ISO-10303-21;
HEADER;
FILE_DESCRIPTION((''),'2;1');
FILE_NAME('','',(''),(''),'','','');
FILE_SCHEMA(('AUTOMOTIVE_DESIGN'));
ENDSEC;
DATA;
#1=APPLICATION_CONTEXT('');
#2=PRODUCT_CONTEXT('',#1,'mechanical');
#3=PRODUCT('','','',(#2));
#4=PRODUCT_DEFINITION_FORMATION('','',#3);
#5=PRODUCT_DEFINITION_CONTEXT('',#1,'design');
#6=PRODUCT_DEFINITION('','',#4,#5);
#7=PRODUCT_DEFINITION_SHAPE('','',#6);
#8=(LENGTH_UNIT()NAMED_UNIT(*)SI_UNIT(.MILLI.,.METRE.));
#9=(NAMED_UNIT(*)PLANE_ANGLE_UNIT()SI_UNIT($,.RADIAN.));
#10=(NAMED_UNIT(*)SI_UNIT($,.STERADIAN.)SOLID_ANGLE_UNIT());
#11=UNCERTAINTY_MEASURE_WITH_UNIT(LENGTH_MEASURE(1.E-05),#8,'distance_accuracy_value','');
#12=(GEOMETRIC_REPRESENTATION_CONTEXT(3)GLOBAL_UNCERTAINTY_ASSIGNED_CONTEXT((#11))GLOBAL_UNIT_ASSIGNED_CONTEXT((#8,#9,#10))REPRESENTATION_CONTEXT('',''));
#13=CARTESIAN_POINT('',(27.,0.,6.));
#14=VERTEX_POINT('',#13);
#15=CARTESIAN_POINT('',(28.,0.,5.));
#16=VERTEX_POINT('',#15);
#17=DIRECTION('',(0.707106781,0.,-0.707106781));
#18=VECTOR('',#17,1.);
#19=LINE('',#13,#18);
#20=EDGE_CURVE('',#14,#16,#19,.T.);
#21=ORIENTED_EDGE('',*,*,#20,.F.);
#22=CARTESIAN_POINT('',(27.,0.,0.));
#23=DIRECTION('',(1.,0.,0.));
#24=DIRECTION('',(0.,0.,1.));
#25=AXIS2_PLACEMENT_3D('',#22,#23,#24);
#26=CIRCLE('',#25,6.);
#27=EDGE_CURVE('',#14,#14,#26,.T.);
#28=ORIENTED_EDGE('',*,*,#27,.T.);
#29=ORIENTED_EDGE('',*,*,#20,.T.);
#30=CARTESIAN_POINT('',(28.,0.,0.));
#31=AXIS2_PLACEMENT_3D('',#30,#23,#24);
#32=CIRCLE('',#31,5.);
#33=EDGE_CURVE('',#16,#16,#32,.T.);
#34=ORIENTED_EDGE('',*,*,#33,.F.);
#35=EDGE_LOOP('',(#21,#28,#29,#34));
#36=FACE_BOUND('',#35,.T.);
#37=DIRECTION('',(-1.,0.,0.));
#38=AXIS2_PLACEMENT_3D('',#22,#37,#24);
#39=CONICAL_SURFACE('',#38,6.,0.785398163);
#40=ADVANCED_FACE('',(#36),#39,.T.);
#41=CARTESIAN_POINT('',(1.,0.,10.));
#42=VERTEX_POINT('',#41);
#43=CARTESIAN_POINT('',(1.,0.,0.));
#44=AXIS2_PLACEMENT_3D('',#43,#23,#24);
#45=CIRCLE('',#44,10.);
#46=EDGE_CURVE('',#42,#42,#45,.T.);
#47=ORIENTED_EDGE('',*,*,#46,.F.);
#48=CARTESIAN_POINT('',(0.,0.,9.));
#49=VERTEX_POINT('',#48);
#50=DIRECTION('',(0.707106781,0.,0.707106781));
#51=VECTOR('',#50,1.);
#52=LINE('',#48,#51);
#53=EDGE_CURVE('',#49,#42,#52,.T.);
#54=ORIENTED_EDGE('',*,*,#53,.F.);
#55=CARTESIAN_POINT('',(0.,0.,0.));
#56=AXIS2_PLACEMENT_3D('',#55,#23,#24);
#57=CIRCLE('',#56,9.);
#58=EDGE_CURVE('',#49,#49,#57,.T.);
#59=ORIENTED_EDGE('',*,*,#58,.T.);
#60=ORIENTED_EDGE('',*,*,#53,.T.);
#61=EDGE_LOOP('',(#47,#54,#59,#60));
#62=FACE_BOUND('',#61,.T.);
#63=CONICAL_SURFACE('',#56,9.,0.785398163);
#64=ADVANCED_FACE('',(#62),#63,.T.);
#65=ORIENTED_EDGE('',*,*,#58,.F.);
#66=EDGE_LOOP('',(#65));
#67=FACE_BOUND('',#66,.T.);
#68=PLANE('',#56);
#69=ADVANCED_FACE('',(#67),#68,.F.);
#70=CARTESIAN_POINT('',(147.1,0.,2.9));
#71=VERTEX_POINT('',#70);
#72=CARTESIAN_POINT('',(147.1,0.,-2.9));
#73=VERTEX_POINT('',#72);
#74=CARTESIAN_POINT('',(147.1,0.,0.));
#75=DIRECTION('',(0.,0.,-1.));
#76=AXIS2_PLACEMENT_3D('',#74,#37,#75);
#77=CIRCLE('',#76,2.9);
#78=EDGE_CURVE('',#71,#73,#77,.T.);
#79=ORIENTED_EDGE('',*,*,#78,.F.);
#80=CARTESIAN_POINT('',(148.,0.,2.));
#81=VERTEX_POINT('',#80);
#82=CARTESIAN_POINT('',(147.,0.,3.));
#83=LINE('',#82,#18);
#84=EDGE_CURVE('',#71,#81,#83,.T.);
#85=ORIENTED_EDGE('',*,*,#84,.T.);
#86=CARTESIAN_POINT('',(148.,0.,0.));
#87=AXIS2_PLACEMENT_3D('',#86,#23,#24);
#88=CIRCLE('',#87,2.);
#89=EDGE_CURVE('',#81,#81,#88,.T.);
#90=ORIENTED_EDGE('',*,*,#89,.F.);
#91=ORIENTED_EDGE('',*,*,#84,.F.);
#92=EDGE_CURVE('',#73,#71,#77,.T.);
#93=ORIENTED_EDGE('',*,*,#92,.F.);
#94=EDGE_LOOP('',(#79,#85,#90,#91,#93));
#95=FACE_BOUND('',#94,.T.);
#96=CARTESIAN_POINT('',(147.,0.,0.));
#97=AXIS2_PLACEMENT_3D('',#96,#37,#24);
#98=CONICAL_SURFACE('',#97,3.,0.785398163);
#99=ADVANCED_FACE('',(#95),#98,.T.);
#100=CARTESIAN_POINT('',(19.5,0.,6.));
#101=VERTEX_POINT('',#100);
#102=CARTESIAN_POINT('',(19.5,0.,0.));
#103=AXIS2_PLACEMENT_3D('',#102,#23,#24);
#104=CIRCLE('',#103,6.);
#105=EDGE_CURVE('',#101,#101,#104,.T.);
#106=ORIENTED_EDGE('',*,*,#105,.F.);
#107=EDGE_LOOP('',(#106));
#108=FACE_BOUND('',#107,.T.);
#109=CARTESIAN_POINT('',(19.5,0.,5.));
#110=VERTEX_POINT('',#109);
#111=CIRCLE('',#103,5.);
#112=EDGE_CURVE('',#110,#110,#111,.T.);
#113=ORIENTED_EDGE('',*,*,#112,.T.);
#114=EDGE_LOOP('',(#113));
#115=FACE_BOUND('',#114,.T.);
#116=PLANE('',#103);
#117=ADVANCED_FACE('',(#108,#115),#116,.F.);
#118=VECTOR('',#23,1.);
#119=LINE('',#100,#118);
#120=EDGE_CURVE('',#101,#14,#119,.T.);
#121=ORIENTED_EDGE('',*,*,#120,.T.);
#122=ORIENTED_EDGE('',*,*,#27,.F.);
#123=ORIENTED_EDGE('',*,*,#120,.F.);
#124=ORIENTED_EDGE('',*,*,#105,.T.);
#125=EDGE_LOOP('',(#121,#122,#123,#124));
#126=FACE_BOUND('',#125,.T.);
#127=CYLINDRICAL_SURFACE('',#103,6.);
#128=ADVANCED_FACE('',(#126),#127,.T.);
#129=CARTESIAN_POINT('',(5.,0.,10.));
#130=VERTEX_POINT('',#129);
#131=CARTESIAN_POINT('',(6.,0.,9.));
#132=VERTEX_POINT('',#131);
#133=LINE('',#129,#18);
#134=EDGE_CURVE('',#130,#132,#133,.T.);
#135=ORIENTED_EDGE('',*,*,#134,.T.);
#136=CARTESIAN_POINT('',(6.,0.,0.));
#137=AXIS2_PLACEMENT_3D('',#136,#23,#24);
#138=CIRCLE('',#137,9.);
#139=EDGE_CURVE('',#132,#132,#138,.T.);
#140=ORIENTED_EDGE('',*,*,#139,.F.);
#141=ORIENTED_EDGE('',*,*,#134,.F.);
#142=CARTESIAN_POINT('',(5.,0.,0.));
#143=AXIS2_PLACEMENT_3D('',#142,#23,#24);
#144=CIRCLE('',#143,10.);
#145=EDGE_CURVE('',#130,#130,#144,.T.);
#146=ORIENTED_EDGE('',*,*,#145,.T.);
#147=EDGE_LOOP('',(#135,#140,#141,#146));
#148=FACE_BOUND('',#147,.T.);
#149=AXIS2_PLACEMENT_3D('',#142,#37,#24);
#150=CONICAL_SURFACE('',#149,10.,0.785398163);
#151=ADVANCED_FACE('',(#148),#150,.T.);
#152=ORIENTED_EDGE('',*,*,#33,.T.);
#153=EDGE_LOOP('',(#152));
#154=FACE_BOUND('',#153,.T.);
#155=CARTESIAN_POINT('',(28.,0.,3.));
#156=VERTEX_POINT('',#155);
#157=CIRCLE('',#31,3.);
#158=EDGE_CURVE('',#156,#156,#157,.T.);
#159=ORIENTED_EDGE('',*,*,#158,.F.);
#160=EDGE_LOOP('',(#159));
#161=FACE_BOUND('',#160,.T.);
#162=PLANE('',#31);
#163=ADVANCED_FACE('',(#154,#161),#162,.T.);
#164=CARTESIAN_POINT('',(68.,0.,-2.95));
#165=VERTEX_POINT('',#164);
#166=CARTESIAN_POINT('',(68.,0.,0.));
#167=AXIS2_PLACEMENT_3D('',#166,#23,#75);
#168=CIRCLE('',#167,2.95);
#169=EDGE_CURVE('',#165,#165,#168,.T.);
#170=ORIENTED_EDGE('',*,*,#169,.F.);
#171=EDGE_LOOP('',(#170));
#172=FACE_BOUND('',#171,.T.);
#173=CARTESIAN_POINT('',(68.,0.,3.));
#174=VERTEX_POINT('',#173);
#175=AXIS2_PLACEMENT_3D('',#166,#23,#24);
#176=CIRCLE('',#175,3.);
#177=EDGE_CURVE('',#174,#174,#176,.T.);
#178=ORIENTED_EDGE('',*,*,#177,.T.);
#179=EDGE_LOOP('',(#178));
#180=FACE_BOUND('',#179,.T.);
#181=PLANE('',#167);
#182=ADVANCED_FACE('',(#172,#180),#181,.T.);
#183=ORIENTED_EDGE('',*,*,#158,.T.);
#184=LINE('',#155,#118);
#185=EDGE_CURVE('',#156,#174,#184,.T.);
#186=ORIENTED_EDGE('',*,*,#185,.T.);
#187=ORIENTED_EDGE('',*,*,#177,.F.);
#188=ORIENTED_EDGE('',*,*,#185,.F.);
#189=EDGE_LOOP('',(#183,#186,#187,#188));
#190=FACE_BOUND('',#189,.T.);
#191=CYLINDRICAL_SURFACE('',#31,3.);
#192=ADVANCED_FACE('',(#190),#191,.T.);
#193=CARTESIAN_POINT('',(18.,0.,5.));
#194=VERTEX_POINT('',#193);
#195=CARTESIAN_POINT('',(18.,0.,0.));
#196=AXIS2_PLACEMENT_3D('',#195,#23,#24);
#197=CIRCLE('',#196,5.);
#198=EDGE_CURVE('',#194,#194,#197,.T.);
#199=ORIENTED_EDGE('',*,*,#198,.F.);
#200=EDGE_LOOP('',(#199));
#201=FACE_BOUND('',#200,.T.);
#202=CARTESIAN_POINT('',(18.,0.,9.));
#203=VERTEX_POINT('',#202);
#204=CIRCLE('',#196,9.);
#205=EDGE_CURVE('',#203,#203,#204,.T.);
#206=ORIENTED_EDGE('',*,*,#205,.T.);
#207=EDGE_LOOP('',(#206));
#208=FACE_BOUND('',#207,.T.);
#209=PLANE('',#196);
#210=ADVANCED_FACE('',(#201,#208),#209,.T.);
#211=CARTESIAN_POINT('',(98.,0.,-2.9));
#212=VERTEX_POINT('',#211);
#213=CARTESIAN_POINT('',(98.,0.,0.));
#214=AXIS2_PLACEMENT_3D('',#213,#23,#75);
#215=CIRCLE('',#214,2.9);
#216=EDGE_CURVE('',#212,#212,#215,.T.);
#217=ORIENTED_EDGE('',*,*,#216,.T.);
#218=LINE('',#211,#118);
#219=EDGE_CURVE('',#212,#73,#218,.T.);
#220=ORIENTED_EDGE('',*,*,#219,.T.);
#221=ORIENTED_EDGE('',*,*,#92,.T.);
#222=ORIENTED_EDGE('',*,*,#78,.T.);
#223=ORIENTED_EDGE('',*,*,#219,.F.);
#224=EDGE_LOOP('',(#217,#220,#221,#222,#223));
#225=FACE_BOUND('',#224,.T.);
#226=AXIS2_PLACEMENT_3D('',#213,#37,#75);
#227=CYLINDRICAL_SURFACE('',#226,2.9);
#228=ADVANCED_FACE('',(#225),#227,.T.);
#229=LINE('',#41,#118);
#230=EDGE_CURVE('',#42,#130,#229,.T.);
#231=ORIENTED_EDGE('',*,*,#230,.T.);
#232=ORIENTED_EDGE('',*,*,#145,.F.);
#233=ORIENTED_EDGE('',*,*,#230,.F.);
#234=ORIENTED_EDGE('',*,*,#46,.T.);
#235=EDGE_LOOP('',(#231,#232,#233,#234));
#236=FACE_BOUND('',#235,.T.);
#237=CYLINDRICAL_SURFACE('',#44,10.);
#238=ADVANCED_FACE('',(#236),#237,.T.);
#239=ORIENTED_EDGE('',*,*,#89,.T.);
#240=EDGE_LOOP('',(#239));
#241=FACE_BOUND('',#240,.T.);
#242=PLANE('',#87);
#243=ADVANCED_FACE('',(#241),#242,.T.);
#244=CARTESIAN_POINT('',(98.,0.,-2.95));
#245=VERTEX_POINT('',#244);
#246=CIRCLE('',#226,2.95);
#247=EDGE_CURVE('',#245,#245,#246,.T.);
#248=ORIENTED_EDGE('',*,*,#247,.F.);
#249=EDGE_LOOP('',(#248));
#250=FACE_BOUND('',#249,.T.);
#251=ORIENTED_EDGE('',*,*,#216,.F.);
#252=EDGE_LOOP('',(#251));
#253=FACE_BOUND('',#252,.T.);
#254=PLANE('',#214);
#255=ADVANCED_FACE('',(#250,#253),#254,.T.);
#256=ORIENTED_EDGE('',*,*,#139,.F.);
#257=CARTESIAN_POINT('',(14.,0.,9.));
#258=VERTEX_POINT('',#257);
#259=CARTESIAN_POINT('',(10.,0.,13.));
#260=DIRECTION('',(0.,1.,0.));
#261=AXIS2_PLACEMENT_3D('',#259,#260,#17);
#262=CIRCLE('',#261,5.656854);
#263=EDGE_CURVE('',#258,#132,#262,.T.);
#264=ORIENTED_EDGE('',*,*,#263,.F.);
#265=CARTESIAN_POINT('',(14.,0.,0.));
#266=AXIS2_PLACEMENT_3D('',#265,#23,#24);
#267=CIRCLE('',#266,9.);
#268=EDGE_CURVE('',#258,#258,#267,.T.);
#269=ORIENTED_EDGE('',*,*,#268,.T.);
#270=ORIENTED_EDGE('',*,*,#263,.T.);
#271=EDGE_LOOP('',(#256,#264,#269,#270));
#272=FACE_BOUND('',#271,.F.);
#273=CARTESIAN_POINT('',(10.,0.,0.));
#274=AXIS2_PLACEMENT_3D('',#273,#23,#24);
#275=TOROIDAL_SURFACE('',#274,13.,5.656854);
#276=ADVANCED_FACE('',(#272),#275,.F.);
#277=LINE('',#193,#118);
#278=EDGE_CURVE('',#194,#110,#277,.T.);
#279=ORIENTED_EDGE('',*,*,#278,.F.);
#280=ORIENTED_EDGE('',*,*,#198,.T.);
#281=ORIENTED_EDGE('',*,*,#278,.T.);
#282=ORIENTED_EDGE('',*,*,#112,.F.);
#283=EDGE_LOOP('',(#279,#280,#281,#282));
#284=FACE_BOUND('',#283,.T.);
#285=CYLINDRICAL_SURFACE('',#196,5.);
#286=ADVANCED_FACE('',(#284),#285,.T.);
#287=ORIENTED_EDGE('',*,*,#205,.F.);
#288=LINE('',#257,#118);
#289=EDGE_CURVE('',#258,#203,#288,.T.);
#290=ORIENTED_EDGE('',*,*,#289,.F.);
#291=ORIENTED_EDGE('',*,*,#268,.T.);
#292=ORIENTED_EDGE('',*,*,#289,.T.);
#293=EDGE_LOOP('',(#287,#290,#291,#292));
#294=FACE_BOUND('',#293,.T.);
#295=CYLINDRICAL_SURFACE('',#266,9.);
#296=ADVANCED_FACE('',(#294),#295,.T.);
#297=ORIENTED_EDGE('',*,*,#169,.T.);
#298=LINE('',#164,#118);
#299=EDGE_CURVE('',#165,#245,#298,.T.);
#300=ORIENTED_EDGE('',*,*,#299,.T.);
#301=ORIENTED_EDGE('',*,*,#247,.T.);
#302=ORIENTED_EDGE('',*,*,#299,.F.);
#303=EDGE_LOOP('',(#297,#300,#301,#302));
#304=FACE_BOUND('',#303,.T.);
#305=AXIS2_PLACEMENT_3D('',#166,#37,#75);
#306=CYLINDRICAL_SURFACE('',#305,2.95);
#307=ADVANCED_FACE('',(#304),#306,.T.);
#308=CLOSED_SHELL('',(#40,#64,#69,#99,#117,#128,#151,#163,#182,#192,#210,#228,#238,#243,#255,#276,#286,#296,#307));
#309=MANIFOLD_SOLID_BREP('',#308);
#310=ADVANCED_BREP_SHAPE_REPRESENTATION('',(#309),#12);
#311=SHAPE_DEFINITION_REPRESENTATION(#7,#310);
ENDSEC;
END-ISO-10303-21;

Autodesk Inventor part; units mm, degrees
ref_plane "YZ Plane" through (0, 0, 0) normal (1, 0, 0) x (0, 1, 0)
sketch "草图1" plane through (0, 0, 0) normal (0, 1, 0) x (-1, 0, 0)
  line L0 (0, 0) -> (0, 9)
  line L1 (0, 9) -> (-1, 10)
  line L2 (-1, 10) -> (-5, 10)
  line L3 (-5, 10) -> (-6, 9)
  line L4 (29.6, 0) -> (-177.6, 0) projected
  arc A0 (-14, 9) -> (-6, 9) centre (-10, 13) ccw
  line L5 (-14, 9) -> (-18, 9)
  line L6 (-18, 9) -> (-18, 5)
  line L7 (-18, 5) -> (-19.5, 5)
  line L8 (-19.5, 5) -> (-19.5, 6)
  line L9 (-19.5, 6) -> (-27, 6)
  line L10 (-27, 6) -> (-28, 5)
  line L11 (-28, 5) -> (-28, 3)
  line L12 (-28, 3) -> (-147, 3)
  line L13 (0, 0) -> (-118, 0)
  line L14 (-147, 3) -> (-148, 2)
  line L15 (-148, 2) -> (-148, 0)
  dimension "d0" = 10
  dimension "d4" = 45
  dimension "d5" = 1
  dimension "d6" = 45
  dimension "d7" = 1
  dimension "d8" = 6
  dimension "d9" = 6
  dimension "d10" = 45
  dimension "d11" = 1
  dimension "d12" = 3
  dimension "d13" = 4
  dimension "d14" = 10
  dimension "d16" = 28
  dimension "d17" = 9
  dimension "d18" = 1.5
  dimension "d19" = 1
  dimension "d21" = 45
  dimension "d22" = 1
  dimension "d23" = 130
revolve "旋转1" add sketch "草图1" angle 360 about axis through (-10, 0, 0) along (1, 0, 0)
thread "螺纹1" size "M12x1" class "4g6g" standard "GB Metric profile" full length
ref_plane "工作平面1" through (98, 0, 0) normal (1, 0, 0) x (0, 0, -1)
sketch "草图2" plane through (98, 0, 0) normal (1, 0, 0) x (0, 0, -1)
  circle A0 centre (0, 0) radius 2.9
  circle A1 centre (0, 0) radius 3
  dimension "d27" = 5.8
  dimension "d30" = 6
extrude "拉伸1" cut sketch "草图2" along normal through all
ref_plane "工作平面2" through (68, 0, 0) normal (1, 0, 0) x (0, 0, -1)
sketch "草图3" plane through (68, 0, 0) normal (1, 0, 0) x (0, 0, -1)
  circle A0 centre (0, 0) radius 2.95
  circle A1 centre (0, 0) radius 3
  dimension "d32" = 5.9
  dimension "d33" = 6
extrude "拉伸2" cut sketch "草图3" along normal through all
equation "\"d0\" = 0.5 * D"
equation "\"d8\" = b"
equation "\"d9\" = 0.5 * Md"
equation "\"d12\" = 0.5 * d3"
equation "\"d13\" = c_"
equation "\"d14\" = a"
equation "\"d16\" = h_"
equation "\"d23\" = L"
equation "\"d1\" = 4"
equation "\"d2\" = 12"
equation "\"d3\" = 6"
equation "\"h_\" = 28"
equation "\"a\" = 10"
equation "\"b\" = 6"
equation "\"c_\" = 4"
equation "\"D1\" = 16"
equation "\"Md\" = 12"
equation "\"L\" = 130"
equation "\"D\" = 20"
properties part number "杆式油标" material "钢，软"
